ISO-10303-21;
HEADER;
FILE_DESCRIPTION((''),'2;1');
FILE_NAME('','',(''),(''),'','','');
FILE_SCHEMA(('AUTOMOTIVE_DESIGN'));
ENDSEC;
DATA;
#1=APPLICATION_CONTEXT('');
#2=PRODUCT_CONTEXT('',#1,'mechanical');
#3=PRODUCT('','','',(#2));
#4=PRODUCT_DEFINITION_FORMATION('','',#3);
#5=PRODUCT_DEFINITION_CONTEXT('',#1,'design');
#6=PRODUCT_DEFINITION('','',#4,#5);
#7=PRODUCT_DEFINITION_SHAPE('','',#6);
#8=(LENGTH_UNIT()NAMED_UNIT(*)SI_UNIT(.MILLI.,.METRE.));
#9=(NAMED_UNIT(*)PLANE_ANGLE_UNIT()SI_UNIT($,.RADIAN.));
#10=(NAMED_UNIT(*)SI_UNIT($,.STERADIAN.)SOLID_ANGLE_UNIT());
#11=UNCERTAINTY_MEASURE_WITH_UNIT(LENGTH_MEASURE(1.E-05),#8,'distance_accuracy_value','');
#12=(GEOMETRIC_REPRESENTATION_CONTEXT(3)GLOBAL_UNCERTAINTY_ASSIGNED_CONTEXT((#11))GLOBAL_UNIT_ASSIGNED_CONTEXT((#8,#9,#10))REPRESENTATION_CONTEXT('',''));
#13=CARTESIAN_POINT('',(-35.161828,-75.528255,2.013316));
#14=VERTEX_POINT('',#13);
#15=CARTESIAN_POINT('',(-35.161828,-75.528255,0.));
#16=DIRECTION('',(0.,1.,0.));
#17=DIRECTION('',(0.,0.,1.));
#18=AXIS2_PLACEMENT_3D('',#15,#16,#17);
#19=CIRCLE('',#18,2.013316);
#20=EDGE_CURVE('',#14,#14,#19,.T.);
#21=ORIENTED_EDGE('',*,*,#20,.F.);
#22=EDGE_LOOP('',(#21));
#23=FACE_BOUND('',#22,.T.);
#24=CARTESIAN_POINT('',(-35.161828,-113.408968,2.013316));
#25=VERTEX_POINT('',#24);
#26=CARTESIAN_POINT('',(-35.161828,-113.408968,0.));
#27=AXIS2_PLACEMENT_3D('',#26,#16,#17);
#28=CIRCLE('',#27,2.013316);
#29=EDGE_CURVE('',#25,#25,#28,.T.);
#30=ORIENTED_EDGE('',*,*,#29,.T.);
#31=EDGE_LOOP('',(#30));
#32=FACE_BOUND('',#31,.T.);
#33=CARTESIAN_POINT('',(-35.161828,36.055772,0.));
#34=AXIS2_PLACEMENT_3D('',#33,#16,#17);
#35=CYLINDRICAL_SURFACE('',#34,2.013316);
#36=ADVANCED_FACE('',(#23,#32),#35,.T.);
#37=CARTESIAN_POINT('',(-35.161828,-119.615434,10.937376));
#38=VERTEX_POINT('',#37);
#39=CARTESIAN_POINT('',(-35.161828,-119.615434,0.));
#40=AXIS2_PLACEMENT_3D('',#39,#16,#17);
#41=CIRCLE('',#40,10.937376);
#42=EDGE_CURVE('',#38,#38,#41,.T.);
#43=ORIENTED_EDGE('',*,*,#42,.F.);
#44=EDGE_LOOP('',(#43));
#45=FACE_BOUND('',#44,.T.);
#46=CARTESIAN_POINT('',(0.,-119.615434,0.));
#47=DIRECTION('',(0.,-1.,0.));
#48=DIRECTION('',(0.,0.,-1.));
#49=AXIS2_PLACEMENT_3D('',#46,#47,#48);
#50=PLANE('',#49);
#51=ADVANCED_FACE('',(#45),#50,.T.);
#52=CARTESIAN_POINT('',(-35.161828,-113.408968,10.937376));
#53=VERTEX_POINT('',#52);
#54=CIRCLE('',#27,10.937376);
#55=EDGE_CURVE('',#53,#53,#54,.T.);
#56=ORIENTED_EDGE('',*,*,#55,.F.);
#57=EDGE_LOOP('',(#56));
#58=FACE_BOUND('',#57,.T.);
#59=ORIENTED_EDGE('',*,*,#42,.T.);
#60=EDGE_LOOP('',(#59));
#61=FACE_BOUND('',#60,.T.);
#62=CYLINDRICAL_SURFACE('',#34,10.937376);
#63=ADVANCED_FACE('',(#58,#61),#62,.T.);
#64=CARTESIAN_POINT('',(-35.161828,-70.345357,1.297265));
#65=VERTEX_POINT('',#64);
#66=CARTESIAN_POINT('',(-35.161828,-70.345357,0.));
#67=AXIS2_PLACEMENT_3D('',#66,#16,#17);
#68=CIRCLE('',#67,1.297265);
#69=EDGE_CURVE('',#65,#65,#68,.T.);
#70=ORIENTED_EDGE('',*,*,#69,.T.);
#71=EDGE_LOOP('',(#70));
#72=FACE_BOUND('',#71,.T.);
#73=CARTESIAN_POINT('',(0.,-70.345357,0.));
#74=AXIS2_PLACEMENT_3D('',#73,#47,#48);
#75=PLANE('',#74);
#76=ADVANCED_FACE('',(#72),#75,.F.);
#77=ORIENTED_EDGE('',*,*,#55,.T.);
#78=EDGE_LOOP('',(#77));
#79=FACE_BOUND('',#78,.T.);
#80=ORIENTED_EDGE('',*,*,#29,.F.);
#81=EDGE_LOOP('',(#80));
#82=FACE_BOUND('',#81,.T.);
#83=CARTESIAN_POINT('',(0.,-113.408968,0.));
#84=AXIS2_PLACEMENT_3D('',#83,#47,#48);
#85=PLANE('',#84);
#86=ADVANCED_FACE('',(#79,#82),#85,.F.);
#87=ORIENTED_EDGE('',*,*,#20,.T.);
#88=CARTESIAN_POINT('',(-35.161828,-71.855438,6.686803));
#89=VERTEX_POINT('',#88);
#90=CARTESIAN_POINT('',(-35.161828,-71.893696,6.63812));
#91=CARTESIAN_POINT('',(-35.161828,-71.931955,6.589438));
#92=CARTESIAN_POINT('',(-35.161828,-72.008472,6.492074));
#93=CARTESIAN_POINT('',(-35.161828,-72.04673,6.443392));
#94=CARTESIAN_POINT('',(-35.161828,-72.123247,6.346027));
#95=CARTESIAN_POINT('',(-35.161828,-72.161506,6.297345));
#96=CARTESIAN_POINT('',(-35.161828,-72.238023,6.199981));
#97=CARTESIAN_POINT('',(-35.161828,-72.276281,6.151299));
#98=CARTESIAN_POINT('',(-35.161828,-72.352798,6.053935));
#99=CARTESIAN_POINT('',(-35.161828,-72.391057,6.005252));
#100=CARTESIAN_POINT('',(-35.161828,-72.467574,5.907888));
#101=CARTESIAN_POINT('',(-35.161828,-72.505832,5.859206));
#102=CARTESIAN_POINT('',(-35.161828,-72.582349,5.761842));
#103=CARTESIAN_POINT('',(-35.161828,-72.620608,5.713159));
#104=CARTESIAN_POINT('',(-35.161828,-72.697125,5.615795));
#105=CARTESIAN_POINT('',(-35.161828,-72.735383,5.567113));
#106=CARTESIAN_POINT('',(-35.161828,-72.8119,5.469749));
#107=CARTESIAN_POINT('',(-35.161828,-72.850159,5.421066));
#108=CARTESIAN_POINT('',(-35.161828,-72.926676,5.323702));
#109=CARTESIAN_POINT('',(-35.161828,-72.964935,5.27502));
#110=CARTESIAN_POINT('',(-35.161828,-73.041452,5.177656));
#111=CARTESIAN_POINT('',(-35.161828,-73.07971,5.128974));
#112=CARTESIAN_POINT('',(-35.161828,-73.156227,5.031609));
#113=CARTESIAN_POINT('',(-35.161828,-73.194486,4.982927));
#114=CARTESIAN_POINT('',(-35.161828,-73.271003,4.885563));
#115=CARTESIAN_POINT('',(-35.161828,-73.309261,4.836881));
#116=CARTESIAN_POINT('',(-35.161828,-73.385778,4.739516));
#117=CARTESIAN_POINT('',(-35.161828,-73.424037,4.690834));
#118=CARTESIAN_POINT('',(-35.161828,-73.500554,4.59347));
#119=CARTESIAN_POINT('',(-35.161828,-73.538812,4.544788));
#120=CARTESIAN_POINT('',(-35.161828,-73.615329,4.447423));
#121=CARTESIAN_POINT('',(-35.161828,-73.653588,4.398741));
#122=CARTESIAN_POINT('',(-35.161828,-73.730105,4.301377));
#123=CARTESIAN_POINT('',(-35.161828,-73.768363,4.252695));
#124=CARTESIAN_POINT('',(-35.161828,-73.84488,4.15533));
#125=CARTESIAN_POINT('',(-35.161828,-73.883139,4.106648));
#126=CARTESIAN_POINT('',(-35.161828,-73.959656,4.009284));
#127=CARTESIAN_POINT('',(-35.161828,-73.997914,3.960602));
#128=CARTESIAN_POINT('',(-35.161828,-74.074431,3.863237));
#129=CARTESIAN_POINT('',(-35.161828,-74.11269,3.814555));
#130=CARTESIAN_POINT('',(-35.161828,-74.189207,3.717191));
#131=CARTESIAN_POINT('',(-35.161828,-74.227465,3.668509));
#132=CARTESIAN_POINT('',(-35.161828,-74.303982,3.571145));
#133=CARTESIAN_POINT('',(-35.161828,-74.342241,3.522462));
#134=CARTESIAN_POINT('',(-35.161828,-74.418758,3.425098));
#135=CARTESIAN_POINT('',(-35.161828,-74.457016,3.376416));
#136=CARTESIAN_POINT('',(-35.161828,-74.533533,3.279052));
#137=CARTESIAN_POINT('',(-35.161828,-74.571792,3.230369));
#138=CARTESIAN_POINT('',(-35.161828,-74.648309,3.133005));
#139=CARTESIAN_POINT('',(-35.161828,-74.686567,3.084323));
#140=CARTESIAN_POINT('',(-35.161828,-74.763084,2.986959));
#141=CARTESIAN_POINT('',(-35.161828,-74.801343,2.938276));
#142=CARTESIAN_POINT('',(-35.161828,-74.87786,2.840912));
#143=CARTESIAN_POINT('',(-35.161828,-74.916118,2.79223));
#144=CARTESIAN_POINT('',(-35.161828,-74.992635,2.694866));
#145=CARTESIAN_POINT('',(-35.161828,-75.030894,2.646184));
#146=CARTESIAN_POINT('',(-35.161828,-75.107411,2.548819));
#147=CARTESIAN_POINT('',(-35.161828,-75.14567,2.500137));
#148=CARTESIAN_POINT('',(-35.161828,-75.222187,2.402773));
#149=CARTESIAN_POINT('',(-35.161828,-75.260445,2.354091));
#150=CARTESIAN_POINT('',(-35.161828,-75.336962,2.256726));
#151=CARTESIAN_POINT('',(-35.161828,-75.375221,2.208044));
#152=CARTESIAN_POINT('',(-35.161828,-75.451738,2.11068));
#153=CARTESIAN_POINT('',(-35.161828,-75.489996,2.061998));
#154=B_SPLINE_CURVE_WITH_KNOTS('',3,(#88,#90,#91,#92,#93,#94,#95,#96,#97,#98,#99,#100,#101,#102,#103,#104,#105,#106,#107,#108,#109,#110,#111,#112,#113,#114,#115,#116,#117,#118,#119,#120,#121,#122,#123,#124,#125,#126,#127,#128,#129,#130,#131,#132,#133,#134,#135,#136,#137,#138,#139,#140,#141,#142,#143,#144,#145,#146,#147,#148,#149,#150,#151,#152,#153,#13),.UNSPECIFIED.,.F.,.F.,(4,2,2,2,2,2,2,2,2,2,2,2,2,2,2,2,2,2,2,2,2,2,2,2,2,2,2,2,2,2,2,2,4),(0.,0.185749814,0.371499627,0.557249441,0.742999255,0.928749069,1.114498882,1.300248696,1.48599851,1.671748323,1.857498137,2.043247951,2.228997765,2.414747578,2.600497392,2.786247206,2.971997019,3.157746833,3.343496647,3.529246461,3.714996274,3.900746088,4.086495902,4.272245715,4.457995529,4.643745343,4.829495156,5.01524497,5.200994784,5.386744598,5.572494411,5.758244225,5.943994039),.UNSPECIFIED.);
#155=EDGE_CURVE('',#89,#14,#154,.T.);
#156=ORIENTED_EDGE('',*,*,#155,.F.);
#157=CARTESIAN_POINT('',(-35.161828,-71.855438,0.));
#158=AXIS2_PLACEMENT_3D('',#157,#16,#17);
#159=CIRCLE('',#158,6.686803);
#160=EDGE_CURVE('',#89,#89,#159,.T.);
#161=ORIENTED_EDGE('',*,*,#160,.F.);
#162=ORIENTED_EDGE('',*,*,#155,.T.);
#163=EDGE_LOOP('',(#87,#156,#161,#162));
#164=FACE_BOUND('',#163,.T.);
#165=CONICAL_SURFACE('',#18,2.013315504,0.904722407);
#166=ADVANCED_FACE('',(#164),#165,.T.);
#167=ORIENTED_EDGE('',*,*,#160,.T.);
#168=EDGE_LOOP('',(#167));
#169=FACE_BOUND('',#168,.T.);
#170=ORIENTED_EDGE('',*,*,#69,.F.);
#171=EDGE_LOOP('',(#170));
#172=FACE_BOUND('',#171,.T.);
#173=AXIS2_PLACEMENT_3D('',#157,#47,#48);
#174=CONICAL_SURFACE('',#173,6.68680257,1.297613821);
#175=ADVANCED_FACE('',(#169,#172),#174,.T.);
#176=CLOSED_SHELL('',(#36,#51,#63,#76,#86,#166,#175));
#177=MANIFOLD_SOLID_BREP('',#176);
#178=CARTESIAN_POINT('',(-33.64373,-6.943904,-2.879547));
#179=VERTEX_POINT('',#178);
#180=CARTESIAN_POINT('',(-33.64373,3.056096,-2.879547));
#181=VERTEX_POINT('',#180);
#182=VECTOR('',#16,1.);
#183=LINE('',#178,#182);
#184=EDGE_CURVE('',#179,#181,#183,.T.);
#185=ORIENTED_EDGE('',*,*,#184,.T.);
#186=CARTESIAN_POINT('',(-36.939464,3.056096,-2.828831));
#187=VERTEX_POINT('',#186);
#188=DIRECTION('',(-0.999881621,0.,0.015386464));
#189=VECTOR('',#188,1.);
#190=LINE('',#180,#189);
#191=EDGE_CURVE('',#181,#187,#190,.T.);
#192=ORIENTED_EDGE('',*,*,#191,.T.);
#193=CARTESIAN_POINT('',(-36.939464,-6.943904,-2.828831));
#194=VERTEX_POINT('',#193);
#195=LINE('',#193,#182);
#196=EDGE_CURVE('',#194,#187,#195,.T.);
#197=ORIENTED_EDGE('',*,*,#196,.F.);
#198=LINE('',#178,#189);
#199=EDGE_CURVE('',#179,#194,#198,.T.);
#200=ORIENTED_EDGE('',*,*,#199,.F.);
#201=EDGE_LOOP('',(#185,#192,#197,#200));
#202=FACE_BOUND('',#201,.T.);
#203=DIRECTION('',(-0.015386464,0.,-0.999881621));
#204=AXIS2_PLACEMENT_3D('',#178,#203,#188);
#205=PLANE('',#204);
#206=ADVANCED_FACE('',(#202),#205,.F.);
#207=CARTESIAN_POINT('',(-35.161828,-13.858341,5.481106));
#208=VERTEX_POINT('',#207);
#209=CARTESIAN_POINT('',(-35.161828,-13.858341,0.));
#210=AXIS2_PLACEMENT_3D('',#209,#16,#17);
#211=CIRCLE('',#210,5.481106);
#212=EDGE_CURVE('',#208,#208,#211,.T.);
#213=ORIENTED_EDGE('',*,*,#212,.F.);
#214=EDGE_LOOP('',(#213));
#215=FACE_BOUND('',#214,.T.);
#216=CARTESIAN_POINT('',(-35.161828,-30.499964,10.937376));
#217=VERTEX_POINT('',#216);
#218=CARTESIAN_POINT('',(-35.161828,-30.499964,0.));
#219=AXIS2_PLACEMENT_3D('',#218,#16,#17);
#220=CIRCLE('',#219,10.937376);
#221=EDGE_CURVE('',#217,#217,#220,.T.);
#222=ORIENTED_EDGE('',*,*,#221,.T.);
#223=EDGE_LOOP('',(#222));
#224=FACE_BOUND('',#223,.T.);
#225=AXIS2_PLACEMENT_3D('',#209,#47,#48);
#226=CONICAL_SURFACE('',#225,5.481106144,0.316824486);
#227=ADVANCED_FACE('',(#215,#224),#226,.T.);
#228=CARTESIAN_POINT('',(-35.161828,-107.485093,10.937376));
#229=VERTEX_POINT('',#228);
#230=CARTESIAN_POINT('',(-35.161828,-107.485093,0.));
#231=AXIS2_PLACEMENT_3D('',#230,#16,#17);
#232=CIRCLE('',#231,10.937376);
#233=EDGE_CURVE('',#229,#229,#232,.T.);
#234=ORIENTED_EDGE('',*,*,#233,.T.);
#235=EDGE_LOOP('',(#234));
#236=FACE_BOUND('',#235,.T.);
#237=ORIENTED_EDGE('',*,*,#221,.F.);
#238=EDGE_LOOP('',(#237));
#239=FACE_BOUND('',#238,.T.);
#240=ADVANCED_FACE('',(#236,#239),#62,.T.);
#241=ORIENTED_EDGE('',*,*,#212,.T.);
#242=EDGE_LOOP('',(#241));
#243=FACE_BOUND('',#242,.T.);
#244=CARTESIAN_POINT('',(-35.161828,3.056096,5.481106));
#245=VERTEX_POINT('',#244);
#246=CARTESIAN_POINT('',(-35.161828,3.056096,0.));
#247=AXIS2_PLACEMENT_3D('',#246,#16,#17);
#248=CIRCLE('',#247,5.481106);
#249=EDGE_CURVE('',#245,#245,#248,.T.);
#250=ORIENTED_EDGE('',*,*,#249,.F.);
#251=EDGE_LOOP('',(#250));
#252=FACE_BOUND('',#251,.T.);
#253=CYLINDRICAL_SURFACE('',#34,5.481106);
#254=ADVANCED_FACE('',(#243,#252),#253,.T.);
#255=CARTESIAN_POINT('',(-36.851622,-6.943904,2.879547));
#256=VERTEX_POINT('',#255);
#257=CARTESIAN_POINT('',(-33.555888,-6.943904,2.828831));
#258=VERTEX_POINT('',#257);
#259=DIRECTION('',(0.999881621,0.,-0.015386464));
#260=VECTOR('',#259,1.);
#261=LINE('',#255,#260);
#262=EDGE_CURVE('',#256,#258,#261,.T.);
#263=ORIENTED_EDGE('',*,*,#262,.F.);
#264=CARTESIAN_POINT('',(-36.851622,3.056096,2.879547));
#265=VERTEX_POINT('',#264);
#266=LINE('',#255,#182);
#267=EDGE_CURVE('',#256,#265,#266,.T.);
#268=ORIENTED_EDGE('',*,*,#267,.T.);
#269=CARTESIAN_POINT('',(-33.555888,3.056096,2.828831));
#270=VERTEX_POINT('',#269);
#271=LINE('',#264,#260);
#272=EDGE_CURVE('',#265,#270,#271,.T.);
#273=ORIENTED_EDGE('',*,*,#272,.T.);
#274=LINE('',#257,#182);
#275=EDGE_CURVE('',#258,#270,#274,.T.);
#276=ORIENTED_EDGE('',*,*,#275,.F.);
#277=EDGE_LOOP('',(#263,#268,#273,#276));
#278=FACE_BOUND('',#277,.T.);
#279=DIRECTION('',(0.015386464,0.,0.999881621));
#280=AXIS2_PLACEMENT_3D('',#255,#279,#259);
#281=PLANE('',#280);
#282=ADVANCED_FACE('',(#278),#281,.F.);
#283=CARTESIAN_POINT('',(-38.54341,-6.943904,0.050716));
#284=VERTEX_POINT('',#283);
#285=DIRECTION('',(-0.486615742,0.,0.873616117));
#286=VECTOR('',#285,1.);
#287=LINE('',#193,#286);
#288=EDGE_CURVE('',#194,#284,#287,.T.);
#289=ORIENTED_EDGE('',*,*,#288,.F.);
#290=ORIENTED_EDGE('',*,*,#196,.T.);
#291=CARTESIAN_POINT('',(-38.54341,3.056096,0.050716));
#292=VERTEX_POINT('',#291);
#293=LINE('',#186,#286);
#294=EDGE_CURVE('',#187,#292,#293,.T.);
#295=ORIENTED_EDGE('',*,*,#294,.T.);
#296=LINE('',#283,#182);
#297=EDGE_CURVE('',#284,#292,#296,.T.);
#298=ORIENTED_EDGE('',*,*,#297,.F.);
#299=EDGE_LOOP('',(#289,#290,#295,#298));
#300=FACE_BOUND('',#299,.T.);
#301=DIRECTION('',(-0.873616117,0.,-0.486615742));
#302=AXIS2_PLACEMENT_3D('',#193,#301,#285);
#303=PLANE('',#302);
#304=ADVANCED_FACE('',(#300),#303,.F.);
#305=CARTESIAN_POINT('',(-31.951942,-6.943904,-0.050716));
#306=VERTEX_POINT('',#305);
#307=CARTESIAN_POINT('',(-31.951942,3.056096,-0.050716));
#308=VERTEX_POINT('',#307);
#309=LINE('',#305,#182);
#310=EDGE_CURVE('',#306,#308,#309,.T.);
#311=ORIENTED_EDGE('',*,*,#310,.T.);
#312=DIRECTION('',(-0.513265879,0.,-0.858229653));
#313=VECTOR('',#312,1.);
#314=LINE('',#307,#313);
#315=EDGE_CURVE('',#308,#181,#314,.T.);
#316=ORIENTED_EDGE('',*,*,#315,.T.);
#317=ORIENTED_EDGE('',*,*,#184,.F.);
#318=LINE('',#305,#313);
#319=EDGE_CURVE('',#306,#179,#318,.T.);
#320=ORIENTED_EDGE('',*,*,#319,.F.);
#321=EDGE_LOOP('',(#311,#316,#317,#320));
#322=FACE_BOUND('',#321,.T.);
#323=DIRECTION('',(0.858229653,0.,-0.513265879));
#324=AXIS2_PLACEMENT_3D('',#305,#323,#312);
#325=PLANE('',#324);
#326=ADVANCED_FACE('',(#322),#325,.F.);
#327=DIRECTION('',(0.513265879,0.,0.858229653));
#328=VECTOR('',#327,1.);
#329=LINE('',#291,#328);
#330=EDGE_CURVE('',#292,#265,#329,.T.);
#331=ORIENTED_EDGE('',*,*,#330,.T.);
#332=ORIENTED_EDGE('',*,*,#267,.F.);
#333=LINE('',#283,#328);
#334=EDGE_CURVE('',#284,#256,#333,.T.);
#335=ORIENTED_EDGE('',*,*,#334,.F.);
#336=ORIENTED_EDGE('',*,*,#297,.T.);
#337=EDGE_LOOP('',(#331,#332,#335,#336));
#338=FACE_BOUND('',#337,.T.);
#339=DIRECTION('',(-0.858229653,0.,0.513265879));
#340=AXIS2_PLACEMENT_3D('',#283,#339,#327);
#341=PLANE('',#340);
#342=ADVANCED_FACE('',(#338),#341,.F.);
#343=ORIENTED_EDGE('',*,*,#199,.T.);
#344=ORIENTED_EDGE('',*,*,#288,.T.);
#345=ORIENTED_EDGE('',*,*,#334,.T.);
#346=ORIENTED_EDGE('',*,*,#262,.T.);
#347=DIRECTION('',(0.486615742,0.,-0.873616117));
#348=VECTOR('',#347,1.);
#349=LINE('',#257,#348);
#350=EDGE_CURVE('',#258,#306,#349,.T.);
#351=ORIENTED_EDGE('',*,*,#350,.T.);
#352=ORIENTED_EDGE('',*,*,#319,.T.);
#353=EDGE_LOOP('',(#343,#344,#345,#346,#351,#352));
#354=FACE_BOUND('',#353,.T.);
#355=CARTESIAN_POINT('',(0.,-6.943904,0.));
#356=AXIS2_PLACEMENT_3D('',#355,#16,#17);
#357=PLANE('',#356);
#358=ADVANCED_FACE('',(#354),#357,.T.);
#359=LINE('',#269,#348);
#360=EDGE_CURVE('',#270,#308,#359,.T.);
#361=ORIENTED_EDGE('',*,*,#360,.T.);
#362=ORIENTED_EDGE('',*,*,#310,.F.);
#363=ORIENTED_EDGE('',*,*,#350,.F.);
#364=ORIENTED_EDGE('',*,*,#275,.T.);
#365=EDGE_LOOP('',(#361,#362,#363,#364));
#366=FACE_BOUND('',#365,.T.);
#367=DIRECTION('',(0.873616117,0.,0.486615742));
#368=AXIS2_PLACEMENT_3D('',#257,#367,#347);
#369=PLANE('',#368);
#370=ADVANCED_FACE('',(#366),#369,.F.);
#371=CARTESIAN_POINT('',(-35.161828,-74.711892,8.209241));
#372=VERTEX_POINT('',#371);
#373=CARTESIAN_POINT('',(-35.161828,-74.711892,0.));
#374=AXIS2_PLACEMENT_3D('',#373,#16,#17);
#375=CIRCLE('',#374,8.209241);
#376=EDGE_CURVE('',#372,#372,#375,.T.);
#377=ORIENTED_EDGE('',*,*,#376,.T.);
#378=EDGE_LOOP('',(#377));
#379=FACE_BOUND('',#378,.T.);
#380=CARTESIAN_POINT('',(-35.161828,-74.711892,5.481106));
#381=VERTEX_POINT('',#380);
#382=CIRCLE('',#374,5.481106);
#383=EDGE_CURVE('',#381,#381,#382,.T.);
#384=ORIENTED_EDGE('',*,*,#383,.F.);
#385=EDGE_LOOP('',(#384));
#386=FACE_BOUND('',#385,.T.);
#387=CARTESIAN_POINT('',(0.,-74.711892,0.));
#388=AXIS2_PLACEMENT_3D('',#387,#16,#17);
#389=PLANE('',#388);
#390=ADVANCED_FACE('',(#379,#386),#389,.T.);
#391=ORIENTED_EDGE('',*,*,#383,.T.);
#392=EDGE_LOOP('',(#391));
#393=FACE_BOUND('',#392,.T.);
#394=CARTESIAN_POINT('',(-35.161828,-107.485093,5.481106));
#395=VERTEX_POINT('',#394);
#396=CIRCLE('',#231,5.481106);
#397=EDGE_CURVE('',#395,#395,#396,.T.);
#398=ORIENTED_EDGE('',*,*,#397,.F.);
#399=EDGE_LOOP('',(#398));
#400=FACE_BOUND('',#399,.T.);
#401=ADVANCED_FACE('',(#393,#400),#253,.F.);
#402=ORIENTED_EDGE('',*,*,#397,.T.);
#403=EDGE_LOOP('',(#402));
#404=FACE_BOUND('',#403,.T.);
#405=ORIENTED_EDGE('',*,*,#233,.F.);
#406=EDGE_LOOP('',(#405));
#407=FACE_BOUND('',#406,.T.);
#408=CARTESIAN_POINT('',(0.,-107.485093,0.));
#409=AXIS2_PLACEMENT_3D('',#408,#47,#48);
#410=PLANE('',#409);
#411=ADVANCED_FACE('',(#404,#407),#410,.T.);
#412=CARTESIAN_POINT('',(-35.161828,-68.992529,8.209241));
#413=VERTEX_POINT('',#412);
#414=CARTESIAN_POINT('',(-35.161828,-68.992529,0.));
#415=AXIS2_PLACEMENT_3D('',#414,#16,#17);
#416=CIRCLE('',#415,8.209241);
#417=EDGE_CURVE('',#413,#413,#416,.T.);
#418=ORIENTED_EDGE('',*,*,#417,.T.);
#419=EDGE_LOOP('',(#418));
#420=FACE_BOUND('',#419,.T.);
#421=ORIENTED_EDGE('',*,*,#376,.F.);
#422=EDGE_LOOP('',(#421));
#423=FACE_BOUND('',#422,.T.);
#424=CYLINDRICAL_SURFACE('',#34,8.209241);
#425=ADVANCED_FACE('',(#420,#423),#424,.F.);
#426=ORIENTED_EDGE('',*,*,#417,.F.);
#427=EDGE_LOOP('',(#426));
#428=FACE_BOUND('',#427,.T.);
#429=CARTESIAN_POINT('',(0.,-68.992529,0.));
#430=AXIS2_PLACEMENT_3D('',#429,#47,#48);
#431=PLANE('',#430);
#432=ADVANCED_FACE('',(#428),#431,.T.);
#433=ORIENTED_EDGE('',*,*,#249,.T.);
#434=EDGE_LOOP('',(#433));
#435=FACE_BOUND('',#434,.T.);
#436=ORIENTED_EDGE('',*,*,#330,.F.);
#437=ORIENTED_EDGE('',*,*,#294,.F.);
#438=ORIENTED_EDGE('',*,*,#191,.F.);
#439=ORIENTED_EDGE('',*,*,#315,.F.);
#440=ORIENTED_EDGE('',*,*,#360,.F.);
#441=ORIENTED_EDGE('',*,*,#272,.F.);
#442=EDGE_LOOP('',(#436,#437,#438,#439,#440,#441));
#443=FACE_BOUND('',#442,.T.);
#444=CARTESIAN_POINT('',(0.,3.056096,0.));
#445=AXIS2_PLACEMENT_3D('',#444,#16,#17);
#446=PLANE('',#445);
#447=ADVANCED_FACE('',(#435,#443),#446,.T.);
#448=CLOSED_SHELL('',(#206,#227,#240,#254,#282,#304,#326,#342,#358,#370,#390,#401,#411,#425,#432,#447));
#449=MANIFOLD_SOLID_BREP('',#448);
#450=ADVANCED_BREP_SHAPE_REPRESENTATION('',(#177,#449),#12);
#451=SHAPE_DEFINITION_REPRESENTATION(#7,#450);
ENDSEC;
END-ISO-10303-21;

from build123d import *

# Parameters (mm, degrees)
CUT_EXTRUDE1_DEPTH = 10


# Read off the part's stored shape, not the designer's step: Revolve1
with BuildPart() as part:
    # Revolve1 outline → Revolve1 (revolve)
    with BuildSketch(Plane(origin=(-35.161827578, 0, 0), x_dir=(1, 0, 0), z_dir=(0, 0, 1))):
        Polygon((1.297264634, -70.345356918), (0, -70.345356918), (0, -119.615434084), (10.937375972, -119.615434084), (10.937375972, -113.408967551), (2.013315504, -113.408967551), (2.013315504, -75.528254618), (6.68680257, -71.855437745), align=None)
        Polygon((0, 3.056095738), (0, -68.992528566), (8.209241058, -68.992528566), (8.209241058, -74.711892348), (5.481106144, -74.711892348), (5.481106144, -107.485093425), (10.937375972, -107.485093425), (10.937375972, -30.499963707), (5.481106144, -13.85834073), (5.481106144, 3.056095738), align=None)
    revolve(axis=Axis((-35.161827578, 0, 0), (0, 1, 0)))

    # Sketch2 → Cut-Extrude1 (cut)
    with BuildSketch(Plane(origin=(0, 3.056095738, 0), x_dir=(1, 0, 0), z_dir=(0, 1, 0))):
        Polygon((-33.555887845, -2.828831335), (-31.951942031, 0.050715693), (-33.643730001, 2.879547028), (-36.939463785, 2.828831335), (-38.543409599, -0.050715693), (-36.851621629, -2.879547028), align=None)
    extrude(amount=-CUT_EXTRUDE1_DEPTH, mode=Mode.SUBTRACT)


solid = part.part
